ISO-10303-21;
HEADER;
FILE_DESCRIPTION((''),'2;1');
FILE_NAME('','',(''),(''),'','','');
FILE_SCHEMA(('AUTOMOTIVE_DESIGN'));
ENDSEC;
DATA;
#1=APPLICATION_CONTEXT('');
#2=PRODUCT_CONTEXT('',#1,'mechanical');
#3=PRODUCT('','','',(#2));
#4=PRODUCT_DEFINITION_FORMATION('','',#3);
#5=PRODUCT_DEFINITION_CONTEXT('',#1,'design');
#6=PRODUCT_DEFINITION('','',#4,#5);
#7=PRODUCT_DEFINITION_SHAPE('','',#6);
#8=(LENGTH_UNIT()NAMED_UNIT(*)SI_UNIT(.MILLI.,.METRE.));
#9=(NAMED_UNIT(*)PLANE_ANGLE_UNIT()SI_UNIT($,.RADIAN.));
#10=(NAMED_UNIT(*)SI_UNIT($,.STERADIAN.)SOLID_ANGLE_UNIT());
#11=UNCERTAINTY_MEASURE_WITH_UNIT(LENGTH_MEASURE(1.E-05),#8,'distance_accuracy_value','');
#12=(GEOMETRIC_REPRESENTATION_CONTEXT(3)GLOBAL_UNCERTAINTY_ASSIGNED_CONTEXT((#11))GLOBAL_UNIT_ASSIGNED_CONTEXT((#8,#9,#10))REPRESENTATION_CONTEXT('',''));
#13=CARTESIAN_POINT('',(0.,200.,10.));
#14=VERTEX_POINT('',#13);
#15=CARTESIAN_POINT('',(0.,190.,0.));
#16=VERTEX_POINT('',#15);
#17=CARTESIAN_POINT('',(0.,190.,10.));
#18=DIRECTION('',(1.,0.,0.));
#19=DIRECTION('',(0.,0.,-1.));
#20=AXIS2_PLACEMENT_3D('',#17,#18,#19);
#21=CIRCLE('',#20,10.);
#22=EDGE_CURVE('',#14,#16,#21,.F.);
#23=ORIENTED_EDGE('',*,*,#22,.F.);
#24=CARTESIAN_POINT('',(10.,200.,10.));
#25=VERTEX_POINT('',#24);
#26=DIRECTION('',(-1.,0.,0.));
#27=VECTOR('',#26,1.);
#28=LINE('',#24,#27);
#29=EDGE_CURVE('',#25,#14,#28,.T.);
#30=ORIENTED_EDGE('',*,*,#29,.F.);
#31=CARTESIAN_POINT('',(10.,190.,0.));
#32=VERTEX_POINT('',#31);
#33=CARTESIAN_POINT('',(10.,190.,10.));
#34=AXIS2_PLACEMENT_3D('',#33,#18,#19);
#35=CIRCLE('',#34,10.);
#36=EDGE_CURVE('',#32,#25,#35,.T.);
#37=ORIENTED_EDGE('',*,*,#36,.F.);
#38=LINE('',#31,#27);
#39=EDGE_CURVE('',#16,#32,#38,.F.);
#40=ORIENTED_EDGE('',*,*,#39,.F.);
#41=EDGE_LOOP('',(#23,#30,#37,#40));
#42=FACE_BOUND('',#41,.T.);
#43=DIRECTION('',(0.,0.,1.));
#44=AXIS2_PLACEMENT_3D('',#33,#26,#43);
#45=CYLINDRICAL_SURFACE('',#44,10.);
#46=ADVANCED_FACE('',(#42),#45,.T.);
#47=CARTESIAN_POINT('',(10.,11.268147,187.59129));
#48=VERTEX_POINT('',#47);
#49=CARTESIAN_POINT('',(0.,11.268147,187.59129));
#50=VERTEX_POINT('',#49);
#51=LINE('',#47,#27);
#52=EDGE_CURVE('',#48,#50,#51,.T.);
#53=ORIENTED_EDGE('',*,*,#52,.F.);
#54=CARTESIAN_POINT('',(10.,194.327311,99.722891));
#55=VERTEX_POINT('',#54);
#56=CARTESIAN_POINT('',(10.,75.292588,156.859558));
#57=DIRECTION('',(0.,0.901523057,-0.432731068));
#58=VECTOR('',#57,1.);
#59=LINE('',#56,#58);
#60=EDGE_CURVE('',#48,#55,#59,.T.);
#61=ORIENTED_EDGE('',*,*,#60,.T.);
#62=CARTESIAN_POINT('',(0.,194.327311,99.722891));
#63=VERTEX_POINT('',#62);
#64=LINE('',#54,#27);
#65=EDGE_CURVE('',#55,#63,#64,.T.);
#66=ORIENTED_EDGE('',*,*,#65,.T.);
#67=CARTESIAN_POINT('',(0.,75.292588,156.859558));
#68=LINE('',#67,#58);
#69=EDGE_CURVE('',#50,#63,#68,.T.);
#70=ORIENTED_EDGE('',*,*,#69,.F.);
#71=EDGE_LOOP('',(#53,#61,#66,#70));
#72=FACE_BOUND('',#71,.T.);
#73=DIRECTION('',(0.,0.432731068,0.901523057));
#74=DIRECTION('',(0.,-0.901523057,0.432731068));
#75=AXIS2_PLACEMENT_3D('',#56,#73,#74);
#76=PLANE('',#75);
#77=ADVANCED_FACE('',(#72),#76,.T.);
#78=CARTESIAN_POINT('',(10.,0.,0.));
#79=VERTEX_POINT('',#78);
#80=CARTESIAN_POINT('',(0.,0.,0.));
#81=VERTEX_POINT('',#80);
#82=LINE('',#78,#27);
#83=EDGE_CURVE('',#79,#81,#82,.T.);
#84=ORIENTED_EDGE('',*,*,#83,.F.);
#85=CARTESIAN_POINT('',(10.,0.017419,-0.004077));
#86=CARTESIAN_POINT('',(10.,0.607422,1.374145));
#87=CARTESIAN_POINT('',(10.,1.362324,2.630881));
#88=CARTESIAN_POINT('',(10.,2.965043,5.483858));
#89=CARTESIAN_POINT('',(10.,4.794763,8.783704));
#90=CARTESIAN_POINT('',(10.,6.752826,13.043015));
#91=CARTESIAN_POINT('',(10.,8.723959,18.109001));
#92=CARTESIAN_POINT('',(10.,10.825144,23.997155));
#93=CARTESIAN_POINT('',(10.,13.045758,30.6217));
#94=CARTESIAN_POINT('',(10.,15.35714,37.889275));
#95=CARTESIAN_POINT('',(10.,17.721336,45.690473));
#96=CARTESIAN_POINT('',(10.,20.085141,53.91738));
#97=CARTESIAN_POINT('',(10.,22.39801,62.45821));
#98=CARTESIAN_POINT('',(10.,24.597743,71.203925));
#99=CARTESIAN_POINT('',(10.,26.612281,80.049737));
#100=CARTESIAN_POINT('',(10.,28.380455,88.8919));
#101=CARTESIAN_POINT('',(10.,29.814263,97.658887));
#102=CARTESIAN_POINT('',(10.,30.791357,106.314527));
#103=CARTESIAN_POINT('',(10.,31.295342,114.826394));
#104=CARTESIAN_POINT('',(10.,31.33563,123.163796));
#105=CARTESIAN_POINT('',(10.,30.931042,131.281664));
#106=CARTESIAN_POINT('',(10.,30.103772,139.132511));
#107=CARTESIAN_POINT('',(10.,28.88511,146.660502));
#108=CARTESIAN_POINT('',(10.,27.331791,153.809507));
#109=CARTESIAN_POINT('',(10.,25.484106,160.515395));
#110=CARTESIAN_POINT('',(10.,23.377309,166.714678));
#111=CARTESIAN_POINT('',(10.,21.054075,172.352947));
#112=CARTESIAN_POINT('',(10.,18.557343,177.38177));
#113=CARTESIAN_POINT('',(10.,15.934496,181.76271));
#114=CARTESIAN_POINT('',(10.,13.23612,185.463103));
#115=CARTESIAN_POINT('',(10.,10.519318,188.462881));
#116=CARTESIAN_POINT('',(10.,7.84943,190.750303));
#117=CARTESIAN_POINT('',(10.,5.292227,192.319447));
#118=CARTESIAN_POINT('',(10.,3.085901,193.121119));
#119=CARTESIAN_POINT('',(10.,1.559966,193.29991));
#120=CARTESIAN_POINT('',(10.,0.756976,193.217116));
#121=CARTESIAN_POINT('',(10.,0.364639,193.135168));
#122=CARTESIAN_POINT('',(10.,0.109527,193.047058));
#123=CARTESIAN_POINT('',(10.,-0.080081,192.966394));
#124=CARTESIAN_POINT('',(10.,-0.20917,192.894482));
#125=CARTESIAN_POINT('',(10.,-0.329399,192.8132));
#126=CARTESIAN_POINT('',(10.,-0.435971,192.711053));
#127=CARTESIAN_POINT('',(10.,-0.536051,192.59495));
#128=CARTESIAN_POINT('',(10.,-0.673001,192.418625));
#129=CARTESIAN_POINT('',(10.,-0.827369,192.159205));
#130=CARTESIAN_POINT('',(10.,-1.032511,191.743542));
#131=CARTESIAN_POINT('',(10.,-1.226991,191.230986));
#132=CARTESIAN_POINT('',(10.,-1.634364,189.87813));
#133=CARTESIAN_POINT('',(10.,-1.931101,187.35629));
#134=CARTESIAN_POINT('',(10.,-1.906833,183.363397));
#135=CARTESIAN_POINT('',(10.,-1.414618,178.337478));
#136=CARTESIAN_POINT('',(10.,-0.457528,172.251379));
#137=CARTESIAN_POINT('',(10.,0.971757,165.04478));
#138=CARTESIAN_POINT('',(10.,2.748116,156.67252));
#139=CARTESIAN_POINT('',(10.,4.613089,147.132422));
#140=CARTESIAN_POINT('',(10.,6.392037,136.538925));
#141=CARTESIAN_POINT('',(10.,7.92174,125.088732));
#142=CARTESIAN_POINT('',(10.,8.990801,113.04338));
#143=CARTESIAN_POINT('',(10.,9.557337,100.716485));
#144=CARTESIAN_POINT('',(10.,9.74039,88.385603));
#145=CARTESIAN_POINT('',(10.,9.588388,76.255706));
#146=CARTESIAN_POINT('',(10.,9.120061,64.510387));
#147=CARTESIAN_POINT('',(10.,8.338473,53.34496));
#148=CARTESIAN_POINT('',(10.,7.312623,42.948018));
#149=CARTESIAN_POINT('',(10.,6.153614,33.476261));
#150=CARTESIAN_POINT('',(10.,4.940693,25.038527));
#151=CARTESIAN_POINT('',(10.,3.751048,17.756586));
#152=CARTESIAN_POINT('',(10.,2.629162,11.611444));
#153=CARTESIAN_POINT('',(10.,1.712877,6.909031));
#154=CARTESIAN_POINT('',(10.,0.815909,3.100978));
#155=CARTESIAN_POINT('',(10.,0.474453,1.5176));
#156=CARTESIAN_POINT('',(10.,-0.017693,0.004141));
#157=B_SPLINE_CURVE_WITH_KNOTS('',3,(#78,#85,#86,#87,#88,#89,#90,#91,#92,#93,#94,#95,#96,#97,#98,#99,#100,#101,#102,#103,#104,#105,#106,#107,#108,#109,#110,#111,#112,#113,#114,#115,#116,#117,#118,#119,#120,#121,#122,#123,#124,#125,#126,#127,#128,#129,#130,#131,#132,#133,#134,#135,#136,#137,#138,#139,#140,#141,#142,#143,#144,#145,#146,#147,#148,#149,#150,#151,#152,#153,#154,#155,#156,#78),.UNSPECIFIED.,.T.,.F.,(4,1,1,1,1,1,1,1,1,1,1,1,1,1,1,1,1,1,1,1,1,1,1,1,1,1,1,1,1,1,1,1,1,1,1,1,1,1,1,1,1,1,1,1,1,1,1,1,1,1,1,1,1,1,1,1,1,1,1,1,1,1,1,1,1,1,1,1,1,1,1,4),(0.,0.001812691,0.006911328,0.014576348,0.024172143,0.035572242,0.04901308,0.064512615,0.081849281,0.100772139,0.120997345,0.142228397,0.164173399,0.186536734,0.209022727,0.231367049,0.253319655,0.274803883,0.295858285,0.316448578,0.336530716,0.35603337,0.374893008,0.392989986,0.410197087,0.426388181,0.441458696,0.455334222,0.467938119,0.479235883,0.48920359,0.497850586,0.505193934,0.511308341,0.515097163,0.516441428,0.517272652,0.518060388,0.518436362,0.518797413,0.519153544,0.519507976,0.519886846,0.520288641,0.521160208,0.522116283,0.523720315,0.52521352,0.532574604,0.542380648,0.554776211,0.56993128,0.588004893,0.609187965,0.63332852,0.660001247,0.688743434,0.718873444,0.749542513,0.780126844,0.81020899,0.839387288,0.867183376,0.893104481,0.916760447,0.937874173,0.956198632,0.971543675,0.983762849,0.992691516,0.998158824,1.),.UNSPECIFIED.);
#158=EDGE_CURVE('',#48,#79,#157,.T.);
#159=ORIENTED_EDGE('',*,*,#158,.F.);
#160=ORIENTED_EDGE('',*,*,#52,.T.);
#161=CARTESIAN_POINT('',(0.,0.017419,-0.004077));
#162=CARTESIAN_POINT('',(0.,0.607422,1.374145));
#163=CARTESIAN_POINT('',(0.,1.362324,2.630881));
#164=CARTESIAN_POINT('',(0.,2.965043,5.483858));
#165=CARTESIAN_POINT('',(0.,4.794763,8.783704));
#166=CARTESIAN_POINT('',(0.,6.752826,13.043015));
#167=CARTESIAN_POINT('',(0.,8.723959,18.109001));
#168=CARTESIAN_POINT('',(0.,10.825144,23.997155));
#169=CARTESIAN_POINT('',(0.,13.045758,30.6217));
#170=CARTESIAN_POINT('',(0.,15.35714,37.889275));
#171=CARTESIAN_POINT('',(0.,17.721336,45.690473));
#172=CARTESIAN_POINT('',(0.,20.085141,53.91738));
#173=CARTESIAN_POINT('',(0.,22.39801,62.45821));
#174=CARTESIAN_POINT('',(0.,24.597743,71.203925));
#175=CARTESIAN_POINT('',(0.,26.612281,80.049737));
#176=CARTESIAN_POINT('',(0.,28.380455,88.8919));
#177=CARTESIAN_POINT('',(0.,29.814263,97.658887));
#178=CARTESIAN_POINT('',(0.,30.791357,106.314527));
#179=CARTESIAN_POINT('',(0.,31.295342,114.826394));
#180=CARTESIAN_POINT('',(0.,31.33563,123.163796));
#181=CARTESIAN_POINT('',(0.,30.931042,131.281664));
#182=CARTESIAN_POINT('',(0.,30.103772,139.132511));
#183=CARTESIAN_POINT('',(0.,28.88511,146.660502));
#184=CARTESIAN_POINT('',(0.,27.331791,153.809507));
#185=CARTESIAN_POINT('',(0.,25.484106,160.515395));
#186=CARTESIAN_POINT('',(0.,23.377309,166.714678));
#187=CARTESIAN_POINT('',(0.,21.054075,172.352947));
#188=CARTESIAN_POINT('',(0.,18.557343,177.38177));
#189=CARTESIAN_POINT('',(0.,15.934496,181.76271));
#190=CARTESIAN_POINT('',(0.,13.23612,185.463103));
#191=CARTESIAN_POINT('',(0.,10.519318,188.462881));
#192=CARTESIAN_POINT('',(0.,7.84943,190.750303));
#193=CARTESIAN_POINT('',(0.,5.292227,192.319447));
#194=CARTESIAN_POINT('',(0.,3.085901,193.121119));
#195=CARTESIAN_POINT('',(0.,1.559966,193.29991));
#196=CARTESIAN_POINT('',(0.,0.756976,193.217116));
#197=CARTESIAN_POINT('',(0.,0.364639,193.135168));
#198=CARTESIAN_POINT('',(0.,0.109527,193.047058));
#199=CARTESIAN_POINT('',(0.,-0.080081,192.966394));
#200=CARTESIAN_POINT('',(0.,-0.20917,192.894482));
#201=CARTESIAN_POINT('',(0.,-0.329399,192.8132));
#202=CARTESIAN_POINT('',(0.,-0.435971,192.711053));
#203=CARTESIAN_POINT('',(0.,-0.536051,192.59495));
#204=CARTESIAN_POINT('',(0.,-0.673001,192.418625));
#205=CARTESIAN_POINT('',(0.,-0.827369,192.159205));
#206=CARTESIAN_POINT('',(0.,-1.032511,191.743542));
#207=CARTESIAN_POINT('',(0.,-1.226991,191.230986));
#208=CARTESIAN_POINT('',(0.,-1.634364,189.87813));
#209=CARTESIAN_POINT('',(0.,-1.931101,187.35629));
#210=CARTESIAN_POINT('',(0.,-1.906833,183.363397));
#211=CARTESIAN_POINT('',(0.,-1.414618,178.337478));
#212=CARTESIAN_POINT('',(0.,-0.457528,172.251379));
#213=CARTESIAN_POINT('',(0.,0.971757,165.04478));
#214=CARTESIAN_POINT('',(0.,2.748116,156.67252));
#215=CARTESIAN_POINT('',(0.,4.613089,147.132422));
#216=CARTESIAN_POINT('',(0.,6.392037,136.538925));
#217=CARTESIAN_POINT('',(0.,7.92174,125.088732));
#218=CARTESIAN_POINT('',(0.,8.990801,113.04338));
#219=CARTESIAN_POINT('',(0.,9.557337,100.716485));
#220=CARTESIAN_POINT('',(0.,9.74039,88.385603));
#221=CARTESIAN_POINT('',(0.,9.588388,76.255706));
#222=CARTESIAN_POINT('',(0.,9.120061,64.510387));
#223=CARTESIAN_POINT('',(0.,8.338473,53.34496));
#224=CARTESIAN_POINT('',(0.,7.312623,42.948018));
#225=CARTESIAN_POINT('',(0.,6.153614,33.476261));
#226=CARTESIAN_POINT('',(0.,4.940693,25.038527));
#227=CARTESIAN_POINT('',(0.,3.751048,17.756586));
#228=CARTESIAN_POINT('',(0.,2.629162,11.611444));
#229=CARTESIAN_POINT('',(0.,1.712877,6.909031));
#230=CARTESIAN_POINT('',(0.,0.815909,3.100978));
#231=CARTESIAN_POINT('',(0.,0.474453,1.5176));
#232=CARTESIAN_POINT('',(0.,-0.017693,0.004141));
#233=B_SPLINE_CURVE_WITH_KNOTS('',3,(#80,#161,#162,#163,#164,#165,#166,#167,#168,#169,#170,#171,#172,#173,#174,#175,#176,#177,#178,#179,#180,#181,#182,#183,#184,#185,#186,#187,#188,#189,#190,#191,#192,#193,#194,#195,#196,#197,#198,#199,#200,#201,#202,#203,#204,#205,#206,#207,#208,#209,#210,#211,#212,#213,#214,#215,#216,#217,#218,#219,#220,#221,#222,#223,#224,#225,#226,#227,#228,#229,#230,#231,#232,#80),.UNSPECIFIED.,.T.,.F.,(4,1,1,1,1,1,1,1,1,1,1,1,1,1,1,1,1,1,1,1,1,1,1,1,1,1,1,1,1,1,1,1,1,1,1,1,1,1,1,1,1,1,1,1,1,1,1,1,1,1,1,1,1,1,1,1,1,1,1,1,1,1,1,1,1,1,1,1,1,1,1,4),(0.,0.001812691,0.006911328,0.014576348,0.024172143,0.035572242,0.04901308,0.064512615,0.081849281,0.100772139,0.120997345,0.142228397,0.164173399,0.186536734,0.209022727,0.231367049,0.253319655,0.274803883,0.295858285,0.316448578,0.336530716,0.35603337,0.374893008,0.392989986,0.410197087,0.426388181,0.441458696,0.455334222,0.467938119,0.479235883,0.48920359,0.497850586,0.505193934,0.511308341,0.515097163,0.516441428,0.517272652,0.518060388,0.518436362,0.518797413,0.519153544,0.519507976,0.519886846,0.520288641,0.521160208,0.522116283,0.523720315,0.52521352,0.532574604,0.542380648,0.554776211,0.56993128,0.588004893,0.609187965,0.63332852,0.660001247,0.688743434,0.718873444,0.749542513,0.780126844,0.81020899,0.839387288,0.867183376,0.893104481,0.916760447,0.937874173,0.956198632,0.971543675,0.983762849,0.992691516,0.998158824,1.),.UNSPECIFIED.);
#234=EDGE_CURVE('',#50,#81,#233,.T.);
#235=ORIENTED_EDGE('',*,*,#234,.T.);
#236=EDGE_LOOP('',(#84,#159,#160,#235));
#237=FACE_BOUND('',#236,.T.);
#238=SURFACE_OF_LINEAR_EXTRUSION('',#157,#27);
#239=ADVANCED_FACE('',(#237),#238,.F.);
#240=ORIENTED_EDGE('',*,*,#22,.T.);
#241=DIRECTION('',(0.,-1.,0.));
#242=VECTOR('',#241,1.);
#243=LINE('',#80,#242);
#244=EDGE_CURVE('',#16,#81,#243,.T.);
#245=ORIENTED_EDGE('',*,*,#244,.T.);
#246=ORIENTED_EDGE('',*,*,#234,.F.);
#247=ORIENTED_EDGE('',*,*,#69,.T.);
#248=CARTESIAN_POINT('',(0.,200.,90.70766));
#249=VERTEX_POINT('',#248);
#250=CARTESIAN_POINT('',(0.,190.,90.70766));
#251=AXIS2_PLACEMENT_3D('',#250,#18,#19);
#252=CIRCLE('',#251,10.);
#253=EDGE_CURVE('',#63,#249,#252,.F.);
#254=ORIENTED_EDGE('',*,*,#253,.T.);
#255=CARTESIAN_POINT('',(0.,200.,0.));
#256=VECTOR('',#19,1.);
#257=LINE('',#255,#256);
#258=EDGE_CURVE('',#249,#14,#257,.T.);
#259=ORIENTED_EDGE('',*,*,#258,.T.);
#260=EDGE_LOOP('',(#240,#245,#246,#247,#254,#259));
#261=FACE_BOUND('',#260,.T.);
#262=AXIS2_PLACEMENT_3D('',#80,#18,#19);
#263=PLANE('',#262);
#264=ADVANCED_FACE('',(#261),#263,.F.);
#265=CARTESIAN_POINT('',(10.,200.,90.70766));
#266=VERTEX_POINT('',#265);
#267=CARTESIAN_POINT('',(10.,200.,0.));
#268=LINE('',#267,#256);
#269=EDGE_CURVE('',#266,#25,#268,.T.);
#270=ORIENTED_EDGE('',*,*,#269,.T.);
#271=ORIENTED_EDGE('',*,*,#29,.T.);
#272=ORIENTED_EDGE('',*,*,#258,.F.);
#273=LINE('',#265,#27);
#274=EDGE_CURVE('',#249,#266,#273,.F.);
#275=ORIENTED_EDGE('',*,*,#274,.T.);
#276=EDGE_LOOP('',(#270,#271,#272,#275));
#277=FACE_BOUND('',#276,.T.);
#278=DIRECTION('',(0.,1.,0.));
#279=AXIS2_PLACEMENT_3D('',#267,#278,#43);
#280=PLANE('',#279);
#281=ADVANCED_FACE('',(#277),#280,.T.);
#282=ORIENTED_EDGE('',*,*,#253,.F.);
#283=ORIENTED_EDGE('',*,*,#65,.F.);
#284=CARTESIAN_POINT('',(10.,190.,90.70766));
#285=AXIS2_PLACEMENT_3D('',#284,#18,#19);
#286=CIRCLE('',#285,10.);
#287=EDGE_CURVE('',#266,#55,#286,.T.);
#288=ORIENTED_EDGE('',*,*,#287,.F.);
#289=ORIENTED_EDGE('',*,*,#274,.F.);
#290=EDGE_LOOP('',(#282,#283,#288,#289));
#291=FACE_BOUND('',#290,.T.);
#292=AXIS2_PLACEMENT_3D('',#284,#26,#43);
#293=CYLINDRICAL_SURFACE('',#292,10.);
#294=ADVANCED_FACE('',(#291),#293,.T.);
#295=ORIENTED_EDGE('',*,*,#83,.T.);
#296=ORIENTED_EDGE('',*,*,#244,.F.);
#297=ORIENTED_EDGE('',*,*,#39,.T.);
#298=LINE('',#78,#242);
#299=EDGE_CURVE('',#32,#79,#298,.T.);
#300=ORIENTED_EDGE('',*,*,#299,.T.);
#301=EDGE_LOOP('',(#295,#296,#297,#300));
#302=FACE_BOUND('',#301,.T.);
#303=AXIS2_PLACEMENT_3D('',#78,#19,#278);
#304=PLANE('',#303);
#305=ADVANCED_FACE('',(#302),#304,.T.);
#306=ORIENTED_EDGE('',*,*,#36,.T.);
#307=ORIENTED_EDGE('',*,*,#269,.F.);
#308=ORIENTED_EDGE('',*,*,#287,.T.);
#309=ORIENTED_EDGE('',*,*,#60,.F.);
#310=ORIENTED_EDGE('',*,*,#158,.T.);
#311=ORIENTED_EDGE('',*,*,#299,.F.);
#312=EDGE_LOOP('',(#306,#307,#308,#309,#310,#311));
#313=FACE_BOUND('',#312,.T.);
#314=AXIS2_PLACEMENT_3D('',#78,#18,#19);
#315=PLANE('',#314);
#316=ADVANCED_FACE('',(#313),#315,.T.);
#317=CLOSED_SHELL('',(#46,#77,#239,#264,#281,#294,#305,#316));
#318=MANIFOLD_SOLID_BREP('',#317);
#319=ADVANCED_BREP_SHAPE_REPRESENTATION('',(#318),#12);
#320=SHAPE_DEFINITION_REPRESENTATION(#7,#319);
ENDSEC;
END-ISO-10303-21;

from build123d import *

# Parameters (mm, degrees)
BOSS_EXTRUDE1_DEPTH = 10
FILLET1_R           = 10
FILLET2_R           = 10


with BuildPart() as part:
    # Sketch4 → Boss-Extrude1 (new body)
    with BuildSketch(Plane(origin=(0, 0, 0), x_dir=(0, 0, -1), z_dir=(1, 0, 0))):
        with BuildLine():
            add(Edge.make_bspline(
                [(-187.591289537, 11.268146798), (-187.910759487, 10.96376416), (-189.053363989, 9.83010396), (-190.750303118, 7.849430297), (-192.319447204, 5.292227114), (-193.121118694, 3.085900933), (-193.299910313, 1.559966185), (-193.217116114, 0.756976121), (-193.135168354, 0.364638659), (-193.047057743, 0.109527208), (-192.96639442, -0.080081172), (-192.894481628, -0.209169578), (-192.813199569, -0.32939945), (-192.711052749, -0.435970861), (-192.594950194, -0.53605079), (-192.418624979, -0.673000911), (-192.159205485, -0.827368923), (-191.743541908, -1.032510896), (-191.230986193, -1.226991107), (-189.878130351, -1.634363638), (-187.356289931, -1.931101096), (-183.363397329, -1.906833463), (-178.337477564, -1.414618093), (-172.251379163, -0.457528265), (-165.04477977, 0.971756922), (-156.672519985, 2.748116294), (-147.132421676, 4.613088792), (-136.538925287, 6.392036957), (-125.088731717, 7.921740474), (-113.043379816, 8.990800612), (-100.71648472, 9.557336848), (-88.385603015, 9.740389553), (-76.255706097, 9.588388175), (-64.510387484, 9.120060905), (-53.344960285, 8.338472651), (-42.948017549, 7.31262327), (-33.476260533, 6.153614235), (-25.038527154, 4.940692714), (-17.75658571, 3.75104804), (-11.611443602, 2.629162446), (-6.909030546, 1.71287727), (-3.100978366, 0.815909006), (-1.51759987, 0.474452698), (6.3484e-05, -0.019060108), (4.5473e-05, 0.000407463), (0, 0.000636824)],
                knots=[0.485936785, 0.485936785, 0.485936785, 0.485936785, 0.48920359, 0.497850586, 0.505193934, 0.511308341, 0.515097163, 0.516441428, 0.517272652, 0.518060388, 0.518436362, 0.518797413, 0.519153544, 0.519507976, 0.519886846, 0.520288641, 0.521160208, 0.522116283, 0.523720315, 0.52521352, 0.532574604, 0.542380648, 0.554776211, 0.56993128, 0.588004893, 0.609187965, 0.63332852, 0.660001247, 0.688743434, 0.718873444, 0.749542513, 0.780126844, 0.81020899, 0.839387288, 0.867183376, 0.893104481, 0.916760447, 0.937874173, 0.956198632, 0.971543675, 0.983762849, 0.992691516, 0.998158824, 1, 1.000020304, 1.000020304, 1.000020304, 1.000020304], degree=3))
            Line((0, 0.000636824), (0, 200))
            Line((0, 200), (-97, 200))
            Line((-97, 200), (-187.591289537, 11.268146798))
        make_face()
    extrude(amount=BOSS_EXTRUDE1_DEPTH)

    # Fillet1
    fillet1_edges = [part.edges().sort_by_distance(p)[0] for p in [
        (5, 200, 97),
    ]]
    fillet(fillet1_edges, radius=FILLET1_R)

    # Fillet2
    fillet2_edges = [part.edges().sort_by_distance(p)[0] for p in [
        (5, 200, 0),
    ]]
    fillet(fillet2_edges, radius=FILLET2_R)


solid = part.part
